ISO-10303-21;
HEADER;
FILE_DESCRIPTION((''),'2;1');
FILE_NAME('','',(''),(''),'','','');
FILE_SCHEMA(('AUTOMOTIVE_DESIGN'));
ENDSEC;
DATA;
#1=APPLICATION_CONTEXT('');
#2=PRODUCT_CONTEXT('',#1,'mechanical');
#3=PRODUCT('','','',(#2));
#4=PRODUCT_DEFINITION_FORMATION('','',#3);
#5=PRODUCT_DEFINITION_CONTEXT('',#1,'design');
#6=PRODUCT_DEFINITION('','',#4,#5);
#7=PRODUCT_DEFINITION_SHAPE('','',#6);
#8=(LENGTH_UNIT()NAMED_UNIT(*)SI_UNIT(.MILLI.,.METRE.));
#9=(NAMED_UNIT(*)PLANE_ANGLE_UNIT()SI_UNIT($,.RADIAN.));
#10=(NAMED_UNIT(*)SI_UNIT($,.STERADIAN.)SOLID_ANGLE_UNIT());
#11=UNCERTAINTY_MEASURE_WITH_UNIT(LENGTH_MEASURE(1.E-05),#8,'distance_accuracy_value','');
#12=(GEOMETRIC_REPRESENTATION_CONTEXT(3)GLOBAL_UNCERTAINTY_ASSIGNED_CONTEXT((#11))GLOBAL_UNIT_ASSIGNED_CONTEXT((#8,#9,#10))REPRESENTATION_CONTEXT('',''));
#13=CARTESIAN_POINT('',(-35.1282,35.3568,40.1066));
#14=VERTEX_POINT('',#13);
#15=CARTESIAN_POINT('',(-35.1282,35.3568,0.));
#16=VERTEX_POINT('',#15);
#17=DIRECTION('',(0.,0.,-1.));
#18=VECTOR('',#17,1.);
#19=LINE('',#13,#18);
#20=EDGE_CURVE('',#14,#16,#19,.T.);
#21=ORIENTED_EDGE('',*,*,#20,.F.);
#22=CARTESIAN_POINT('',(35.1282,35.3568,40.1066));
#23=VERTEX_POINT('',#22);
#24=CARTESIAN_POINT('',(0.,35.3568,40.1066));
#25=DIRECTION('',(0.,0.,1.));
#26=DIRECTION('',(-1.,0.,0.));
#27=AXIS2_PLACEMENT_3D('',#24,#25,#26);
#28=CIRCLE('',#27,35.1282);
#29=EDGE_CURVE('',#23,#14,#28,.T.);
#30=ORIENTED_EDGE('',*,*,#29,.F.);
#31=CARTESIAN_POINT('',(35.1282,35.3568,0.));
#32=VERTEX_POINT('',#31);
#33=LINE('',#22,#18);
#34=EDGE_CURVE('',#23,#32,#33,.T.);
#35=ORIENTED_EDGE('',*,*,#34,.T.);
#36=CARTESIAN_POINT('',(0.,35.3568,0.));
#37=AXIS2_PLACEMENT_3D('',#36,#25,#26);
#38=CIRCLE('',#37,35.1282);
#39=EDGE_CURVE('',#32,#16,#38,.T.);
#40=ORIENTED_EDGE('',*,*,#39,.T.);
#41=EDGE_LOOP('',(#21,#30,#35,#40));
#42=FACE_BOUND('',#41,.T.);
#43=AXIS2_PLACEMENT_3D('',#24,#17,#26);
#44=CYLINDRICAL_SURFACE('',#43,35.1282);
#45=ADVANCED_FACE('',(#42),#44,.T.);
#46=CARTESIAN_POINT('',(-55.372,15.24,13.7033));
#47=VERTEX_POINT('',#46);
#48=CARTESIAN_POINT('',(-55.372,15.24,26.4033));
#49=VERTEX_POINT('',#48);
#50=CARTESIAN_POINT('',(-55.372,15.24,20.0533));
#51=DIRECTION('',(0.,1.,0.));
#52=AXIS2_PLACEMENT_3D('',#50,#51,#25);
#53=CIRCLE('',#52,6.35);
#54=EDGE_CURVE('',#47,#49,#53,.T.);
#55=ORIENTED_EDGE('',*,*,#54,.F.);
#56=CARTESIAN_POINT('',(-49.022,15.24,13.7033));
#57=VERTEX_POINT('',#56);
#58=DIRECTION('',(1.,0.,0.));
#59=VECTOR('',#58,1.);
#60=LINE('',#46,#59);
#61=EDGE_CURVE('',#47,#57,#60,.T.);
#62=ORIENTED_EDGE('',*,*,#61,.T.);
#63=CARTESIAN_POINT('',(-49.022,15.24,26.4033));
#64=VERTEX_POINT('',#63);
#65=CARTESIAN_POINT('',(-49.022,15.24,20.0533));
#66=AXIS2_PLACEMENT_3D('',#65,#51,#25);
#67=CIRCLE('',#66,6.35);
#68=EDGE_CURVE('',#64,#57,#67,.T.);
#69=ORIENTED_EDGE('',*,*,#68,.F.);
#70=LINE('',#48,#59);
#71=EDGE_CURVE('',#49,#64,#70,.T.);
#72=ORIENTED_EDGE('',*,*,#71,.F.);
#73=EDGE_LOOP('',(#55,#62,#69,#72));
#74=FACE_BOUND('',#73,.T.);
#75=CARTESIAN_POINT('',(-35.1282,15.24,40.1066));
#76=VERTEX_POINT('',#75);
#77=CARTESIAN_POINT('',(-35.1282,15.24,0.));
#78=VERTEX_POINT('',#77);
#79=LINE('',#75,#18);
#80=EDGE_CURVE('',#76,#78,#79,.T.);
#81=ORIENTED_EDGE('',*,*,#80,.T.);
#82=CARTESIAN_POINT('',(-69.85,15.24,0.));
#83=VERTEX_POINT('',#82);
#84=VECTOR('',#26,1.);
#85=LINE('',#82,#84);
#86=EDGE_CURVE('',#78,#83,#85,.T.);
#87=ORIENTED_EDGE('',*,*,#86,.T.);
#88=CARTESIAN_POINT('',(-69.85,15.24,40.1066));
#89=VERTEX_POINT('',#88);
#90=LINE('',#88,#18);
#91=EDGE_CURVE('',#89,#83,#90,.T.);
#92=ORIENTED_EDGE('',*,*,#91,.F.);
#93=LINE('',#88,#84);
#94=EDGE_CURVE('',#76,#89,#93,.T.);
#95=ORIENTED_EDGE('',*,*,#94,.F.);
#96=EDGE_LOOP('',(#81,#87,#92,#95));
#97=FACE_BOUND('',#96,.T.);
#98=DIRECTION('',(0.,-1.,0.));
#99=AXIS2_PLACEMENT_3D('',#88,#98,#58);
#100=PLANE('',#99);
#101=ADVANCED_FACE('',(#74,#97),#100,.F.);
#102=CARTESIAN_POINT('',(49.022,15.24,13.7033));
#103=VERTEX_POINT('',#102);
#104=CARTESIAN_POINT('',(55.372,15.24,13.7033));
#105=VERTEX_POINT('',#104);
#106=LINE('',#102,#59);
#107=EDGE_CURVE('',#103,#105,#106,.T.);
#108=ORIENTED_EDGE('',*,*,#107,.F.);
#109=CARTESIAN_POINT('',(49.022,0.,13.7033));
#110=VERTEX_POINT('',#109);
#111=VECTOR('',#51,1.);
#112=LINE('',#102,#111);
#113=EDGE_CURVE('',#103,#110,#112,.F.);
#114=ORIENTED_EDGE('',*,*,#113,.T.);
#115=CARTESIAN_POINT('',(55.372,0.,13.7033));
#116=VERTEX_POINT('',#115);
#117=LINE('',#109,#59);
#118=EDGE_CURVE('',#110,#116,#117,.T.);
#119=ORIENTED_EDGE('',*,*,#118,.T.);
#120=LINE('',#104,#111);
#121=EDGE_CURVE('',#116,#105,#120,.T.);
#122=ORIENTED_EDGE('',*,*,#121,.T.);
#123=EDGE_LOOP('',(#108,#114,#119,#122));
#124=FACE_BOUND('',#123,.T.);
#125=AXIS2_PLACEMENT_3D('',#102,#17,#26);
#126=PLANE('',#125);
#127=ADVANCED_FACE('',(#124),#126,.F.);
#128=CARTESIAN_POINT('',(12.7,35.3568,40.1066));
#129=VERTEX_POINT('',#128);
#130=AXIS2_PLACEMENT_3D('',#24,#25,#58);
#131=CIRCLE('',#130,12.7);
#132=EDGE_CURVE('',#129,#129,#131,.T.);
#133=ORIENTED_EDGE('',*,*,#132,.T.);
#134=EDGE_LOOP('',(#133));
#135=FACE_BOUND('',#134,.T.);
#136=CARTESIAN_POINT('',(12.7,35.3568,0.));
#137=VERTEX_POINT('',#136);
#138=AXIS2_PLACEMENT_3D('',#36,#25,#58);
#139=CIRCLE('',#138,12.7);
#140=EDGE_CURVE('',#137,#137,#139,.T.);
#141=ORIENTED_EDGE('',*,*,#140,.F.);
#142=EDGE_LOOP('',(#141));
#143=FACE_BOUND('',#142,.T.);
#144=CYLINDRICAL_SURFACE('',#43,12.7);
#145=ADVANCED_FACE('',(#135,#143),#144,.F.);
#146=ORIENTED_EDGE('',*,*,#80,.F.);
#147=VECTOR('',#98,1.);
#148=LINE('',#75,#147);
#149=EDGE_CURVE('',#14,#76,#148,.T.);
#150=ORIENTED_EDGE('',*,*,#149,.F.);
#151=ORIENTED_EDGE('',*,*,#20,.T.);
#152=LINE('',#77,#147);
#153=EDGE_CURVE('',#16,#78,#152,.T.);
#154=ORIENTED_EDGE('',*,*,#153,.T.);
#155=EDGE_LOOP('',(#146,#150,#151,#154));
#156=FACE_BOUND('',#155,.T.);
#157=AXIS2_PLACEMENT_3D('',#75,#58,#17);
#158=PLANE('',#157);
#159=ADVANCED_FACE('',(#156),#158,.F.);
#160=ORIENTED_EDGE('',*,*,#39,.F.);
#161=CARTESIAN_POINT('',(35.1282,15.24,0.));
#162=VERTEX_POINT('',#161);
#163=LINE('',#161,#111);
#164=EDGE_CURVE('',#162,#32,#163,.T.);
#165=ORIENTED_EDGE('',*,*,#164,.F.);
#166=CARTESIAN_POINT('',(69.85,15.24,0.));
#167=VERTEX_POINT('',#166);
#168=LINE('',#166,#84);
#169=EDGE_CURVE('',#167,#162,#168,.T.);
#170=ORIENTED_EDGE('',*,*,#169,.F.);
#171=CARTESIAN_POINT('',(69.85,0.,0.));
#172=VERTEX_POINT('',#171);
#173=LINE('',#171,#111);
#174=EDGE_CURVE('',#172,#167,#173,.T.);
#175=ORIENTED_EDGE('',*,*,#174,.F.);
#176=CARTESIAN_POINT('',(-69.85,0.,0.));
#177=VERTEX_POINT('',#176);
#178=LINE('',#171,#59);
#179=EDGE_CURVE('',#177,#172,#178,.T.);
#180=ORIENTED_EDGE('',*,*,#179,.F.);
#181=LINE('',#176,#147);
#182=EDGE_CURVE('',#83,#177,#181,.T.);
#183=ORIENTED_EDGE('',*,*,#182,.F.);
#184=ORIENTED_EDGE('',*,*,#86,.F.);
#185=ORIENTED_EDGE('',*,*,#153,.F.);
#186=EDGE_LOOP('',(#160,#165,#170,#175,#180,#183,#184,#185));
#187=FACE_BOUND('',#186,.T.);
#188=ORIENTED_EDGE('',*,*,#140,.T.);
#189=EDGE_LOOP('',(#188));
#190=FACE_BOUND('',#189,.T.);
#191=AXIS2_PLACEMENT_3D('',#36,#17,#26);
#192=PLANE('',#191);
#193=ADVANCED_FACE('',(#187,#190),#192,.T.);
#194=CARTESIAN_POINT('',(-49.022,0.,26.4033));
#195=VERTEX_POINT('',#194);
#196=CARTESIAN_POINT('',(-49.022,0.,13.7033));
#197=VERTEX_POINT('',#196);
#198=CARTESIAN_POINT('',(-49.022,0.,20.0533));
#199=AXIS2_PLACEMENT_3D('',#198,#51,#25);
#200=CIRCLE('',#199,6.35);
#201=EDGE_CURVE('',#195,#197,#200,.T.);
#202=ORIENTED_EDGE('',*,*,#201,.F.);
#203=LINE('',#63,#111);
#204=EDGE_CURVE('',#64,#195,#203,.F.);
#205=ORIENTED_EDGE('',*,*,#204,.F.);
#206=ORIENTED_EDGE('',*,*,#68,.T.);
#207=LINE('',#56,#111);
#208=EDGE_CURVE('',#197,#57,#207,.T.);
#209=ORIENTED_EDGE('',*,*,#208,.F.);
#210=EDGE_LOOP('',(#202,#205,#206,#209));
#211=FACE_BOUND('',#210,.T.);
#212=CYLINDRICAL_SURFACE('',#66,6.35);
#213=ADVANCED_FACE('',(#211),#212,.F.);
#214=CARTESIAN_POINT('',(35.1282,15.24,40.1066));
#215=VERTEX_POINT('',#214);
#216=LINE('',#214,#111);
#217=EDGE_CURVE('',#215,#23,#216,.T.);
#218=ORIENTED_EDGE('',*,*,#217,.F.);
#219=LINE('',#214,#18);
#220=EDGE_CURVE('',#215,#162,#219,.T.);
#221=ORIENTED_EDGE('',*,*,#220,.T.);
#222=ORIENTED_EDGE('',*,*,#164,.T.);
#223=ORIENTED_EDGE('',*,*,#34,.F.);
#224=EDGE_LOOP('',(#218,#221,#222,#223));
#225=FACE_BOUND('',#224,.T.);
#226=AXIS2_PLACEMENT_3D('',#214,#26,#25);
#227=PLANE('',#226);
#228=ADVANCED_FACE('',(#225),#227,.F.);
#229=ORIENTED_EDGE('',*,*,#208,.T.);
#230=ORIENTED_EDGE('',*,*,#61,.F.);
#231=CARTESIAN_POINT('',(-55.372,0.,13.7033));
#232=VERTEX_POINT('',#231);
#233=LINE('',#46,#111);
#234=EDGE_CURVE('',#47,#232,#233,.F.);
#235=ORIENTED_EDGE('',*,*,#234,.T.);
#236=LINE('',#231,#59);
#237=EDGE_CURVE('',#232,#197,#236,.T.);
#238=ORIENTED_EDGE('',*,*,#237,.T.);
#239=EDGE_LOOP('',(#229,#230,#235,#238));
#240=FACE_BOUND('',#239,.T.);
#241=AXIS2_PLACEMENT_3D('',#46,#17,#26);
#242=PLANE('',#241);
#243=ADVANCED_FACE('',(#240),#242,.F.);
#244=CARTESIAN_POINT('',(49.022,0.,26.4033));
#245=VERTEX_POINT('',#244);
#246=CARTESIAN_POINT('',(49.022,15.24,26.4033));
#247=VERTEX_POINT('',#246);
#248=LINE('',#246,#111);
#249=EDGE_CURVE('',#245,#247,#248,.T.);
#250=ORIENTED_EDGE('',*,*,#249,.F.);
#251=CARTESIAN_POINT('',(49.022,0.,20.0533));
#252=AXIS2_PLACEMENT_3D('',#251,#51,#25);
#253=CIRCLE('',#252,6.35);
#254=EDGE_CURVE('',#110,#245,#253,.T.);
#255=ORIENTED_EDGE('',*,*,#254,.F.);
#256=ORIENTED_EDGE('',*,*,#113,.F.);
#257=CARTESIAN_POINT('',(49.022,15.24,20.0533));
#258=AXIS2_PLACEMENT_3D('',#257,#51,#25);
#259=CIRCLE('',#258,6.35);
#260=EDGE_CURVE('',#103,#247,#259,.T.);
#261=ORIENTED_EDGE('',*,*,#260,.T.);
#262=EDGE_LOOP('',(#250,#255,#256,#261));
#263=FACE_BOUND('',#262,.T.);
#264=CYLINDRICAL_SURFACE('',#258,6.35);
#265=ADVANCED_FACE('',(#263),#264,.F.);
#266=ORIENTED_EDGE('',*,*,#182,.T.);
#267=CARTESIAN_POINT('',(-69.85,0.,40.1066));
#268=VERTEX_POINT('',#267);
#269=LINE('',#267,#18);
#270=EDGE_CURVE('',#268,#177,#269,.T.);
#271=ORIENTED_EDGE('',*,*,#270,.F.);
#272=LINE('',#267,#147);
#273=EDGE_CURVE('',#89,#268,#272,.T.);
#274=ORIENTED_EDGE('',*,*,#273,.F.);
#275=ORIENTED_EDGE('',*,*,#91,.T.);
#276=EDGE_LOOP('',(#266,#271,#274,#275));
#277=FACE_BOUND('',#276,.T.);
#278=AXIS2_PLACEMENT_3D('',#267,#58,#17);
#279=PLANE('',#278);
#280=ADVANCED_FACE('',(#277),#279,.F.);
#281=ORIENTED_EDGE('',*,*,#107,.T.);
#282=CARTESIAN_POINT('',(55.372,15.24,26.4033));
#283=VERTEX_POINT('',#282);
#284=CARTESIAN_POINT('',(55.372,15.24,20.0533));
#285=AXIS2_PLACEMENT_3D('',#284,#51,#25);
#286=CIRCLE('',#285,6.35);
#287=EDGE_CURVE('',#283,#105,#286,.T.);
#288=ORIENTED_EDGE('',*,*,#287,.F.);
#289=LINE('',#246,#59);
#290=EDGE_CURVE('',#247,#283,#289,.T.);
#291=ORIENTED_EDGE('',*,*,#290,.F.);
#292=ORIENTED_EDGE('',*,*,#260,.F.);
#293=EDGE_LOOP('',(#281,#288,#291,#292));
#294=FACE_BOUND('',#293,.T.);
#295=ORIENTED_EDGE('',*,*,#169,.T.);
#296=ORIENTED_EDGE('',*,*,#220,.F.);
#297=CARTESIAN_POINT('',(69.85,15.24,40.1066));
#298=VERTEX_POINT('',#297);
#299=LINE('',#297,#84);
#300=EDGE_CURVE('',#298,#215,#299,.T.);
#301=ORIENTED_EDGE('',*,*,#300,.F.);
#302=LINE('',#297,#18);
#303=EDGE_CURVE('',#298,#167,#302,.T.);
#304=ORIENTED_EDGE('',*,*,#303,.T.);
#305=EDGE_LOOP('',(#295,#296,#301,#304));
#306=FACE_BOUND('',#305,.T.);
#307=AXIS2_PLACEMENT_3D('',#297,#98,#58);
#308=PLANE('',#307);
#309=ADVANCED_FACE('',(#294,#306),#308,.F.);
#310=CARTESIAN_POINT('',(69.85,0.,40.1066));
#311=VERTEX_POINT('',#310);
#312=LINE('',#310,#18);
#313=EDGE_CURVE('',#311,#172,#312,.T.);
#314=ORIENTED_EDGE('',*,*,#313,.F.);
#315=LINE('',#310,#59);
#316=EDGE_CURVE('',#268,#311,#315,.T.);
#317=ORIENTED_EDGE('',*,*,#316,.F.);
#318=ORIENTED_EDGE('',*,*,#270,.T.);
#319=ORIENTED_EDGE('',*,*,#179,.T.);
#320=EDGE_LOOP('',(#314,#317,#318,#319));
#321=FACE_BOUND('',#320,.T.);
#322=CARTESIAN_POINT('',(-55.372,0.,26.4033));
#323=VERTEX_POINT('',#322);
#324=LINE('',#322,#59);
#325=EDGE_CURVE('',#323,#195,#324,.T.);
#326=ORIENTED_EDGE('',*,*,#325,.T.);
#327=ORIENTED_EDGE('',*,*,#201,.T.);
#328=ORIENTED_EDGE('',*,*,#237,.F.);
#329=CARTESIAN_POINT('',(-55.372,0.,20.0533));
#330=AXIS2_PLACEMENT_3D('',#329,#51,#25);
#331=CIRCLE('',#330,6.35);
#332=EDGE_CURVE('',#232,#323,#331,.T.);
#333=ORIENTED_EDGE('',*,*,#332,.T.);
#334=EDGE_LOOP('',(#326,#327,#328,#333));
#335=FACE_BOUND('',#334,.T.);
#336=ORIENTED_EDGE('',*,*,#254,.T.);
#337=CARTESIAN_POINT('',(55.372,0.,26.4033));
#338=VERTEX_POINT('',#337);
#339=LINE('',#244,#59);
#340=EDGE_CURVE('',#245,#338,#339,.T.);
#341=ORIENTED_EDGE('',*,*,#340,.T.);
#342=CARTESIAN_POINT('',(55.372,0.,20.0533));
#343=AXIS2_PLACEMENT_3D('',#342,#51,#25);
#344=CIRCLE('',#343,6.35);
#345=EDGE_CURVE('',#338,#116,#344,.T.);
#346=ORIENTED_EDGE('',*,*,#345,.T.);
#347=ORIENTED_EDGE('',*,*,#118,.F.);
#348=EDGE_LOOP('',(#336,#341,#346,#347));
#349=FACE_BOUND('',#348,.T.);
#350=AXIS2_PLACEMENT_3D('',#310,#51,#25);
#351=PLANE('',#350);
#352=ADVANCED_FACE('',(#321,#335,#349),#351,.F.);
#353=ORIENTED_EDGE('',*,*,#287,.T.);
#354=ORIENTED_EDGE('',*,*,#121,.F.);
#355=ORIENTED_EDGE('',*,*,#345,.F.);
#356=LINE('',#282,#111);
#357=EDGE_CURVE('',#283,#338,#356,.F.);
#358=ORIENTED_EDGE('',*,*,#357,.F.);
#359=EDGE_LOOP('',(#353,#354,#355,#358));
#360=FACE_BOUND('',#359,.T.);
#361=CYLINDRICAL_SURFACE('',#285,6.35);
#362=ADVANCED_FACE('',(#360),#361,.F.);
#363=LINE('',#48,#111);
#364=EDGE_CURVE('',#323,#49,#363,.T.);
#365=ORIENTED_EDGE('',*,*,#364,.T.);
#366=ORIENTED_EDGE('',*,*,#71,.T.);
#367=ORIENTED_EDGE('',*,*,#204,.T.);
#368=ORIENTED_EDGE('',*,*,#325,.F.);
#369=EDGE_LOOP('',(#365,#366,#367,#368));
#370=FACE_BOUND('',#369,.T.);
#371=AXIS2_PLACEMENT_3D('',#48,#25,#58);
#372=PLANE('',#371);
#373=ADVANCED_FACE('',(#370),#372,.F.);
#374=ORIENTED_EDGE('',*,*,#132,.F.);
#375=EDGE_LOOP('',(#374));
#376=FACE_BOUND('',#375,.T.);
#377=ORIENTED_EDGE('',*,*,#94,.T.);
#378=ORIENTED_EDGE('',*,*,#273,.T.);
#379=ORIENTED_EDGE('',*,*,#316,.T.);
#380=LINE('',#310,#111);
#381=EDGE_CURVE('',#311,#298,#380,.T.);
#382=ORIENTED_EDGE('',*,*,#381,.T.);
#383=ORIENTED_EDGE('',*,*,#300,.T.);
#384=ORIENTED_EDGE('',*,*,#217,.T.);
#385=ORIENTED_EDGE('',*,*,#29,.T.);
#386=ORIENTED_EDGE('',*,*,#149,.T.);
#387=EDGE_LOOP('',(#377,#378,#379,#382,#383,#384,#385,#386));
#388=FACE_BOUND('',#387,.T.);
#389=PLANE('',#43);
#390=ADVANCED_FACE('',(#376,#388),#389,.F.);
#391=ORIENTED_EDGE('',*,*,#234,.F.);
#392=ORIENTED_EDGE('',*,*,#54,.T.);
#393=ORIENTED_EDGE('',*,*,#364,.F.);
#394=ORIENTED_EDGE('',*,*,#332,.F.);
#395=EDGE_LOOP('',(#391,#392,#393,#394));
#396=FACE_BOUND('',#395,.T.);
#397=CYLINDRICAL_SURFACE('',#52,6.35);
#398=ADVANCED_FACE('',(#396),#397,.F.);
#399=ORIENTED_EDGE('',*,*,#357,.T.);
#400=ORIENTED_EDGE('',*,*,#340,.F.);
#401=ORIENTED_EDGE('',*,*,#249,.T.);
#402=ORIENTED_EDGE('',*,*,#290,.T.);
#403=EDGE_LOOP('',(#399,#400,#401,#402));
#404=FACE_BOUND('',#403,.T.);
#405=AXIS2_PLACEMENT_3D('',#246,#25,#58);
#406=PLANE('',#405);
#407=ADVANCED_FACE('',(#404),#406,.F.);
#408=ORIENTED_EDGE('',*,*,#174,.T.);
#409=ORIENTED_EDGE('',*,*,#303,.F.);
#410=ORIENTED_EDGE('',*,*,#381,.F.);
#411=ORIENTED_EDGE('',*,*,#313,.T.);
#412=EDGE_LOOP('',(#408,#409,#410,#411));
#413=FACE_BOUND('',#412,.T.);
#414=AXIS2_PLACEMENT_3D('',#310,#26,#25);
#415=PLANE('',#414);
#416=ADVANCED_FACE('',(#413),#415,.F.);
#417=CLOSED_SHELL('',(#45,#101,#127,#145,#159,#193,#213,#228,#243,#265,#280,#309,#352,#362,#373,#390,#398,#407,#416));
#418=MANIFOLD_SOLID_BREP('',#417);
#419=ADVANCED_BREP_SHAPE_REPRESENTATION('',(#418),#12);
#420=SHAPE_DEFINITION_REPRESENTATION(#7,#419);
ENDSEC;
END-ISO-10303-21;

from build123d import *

# Parameters (mm, degrees)
SKETCH2_R                      = 12.7
BOSS_EXTRUDE1_DEPTH            = 40.1066
F_1_2_0_5_DIAMETER_SLOT1_DEPTH = 15.24


# Read off the part's stored shape, not the designer's step: 1/2 (0.5) Diameter Slot1
with BuildPart() as part:
    # Sketch2 → Boss-Extrude1 (new body)
    with BuildSketch(Plane.XY):
        with BuildLine():
            Line((69.85, 0), (-69.85, 0))
            Line((-69.85, 0), (-69.85, 15.24))
            Line((-69.85, 15.24), (-35.1282, 15.24))
            Line((-35.1282, 15.24), (-35.1282, 35.3568))
            ThreePointArc((-35.1282, 35.3568), (0, 70.485), (35.1282, 35.3568))
            Line((35.1282, 35.3568), (35.1282, 15.24))
            Line((35.1282, 15.24), (69.85, 15.24))
            Line((69.85, 15.24), (69.85, 0))
        make_face()
        with Locations((0, 35.3568)):
            Circle(SKETCH2_R, mode=Mode.SUBTRACT)
    extrude(amount=BOSS_EXTRUDE1_DEPTH)

    # 1/2 (0.5) Diameter Slot1 outline → 1/2 (0.5) Diameter Slot1 (cut)
    with BuildSketch(Plane(origin=(0, 0, 0), x_dir=(1, 0, 0), z_dir=(0, 1, 0))):
        with BuildLine():
            Line((-55.372, -26.4033), (-49.022, -26.4033))
            ThreePointArc((-49.022, -26.4033), (-42.672, -20.0533), (-49.022, -13.7033))
            Line((-49.022, -13.7033), (-55.372, -13.7033))
            ThreePointArc((-55.372, -13.7033), (-61.722, -20.0533), (-55.372, -26.4033))
        make_face()
        with BuildLine():
            ThreePointArc((55.372, -26.4033), (61.722, -20.0533), (55.372, -13.7033))
            Line((55.372, -13.7033), (49.022, -13.7033))
            ThreePointArc((49.022, -13.7033), (42.672, -20.0533), (49.022, -26.4033))
            Line((49.022, -26.4033), (55.372, -26.4033))
        make_face()
    extrude(amount=F_1_2_0_5_DIAMETER_SLOT1_DEPTH, mode=Mode.SUBTRACT)


solid = part.part
